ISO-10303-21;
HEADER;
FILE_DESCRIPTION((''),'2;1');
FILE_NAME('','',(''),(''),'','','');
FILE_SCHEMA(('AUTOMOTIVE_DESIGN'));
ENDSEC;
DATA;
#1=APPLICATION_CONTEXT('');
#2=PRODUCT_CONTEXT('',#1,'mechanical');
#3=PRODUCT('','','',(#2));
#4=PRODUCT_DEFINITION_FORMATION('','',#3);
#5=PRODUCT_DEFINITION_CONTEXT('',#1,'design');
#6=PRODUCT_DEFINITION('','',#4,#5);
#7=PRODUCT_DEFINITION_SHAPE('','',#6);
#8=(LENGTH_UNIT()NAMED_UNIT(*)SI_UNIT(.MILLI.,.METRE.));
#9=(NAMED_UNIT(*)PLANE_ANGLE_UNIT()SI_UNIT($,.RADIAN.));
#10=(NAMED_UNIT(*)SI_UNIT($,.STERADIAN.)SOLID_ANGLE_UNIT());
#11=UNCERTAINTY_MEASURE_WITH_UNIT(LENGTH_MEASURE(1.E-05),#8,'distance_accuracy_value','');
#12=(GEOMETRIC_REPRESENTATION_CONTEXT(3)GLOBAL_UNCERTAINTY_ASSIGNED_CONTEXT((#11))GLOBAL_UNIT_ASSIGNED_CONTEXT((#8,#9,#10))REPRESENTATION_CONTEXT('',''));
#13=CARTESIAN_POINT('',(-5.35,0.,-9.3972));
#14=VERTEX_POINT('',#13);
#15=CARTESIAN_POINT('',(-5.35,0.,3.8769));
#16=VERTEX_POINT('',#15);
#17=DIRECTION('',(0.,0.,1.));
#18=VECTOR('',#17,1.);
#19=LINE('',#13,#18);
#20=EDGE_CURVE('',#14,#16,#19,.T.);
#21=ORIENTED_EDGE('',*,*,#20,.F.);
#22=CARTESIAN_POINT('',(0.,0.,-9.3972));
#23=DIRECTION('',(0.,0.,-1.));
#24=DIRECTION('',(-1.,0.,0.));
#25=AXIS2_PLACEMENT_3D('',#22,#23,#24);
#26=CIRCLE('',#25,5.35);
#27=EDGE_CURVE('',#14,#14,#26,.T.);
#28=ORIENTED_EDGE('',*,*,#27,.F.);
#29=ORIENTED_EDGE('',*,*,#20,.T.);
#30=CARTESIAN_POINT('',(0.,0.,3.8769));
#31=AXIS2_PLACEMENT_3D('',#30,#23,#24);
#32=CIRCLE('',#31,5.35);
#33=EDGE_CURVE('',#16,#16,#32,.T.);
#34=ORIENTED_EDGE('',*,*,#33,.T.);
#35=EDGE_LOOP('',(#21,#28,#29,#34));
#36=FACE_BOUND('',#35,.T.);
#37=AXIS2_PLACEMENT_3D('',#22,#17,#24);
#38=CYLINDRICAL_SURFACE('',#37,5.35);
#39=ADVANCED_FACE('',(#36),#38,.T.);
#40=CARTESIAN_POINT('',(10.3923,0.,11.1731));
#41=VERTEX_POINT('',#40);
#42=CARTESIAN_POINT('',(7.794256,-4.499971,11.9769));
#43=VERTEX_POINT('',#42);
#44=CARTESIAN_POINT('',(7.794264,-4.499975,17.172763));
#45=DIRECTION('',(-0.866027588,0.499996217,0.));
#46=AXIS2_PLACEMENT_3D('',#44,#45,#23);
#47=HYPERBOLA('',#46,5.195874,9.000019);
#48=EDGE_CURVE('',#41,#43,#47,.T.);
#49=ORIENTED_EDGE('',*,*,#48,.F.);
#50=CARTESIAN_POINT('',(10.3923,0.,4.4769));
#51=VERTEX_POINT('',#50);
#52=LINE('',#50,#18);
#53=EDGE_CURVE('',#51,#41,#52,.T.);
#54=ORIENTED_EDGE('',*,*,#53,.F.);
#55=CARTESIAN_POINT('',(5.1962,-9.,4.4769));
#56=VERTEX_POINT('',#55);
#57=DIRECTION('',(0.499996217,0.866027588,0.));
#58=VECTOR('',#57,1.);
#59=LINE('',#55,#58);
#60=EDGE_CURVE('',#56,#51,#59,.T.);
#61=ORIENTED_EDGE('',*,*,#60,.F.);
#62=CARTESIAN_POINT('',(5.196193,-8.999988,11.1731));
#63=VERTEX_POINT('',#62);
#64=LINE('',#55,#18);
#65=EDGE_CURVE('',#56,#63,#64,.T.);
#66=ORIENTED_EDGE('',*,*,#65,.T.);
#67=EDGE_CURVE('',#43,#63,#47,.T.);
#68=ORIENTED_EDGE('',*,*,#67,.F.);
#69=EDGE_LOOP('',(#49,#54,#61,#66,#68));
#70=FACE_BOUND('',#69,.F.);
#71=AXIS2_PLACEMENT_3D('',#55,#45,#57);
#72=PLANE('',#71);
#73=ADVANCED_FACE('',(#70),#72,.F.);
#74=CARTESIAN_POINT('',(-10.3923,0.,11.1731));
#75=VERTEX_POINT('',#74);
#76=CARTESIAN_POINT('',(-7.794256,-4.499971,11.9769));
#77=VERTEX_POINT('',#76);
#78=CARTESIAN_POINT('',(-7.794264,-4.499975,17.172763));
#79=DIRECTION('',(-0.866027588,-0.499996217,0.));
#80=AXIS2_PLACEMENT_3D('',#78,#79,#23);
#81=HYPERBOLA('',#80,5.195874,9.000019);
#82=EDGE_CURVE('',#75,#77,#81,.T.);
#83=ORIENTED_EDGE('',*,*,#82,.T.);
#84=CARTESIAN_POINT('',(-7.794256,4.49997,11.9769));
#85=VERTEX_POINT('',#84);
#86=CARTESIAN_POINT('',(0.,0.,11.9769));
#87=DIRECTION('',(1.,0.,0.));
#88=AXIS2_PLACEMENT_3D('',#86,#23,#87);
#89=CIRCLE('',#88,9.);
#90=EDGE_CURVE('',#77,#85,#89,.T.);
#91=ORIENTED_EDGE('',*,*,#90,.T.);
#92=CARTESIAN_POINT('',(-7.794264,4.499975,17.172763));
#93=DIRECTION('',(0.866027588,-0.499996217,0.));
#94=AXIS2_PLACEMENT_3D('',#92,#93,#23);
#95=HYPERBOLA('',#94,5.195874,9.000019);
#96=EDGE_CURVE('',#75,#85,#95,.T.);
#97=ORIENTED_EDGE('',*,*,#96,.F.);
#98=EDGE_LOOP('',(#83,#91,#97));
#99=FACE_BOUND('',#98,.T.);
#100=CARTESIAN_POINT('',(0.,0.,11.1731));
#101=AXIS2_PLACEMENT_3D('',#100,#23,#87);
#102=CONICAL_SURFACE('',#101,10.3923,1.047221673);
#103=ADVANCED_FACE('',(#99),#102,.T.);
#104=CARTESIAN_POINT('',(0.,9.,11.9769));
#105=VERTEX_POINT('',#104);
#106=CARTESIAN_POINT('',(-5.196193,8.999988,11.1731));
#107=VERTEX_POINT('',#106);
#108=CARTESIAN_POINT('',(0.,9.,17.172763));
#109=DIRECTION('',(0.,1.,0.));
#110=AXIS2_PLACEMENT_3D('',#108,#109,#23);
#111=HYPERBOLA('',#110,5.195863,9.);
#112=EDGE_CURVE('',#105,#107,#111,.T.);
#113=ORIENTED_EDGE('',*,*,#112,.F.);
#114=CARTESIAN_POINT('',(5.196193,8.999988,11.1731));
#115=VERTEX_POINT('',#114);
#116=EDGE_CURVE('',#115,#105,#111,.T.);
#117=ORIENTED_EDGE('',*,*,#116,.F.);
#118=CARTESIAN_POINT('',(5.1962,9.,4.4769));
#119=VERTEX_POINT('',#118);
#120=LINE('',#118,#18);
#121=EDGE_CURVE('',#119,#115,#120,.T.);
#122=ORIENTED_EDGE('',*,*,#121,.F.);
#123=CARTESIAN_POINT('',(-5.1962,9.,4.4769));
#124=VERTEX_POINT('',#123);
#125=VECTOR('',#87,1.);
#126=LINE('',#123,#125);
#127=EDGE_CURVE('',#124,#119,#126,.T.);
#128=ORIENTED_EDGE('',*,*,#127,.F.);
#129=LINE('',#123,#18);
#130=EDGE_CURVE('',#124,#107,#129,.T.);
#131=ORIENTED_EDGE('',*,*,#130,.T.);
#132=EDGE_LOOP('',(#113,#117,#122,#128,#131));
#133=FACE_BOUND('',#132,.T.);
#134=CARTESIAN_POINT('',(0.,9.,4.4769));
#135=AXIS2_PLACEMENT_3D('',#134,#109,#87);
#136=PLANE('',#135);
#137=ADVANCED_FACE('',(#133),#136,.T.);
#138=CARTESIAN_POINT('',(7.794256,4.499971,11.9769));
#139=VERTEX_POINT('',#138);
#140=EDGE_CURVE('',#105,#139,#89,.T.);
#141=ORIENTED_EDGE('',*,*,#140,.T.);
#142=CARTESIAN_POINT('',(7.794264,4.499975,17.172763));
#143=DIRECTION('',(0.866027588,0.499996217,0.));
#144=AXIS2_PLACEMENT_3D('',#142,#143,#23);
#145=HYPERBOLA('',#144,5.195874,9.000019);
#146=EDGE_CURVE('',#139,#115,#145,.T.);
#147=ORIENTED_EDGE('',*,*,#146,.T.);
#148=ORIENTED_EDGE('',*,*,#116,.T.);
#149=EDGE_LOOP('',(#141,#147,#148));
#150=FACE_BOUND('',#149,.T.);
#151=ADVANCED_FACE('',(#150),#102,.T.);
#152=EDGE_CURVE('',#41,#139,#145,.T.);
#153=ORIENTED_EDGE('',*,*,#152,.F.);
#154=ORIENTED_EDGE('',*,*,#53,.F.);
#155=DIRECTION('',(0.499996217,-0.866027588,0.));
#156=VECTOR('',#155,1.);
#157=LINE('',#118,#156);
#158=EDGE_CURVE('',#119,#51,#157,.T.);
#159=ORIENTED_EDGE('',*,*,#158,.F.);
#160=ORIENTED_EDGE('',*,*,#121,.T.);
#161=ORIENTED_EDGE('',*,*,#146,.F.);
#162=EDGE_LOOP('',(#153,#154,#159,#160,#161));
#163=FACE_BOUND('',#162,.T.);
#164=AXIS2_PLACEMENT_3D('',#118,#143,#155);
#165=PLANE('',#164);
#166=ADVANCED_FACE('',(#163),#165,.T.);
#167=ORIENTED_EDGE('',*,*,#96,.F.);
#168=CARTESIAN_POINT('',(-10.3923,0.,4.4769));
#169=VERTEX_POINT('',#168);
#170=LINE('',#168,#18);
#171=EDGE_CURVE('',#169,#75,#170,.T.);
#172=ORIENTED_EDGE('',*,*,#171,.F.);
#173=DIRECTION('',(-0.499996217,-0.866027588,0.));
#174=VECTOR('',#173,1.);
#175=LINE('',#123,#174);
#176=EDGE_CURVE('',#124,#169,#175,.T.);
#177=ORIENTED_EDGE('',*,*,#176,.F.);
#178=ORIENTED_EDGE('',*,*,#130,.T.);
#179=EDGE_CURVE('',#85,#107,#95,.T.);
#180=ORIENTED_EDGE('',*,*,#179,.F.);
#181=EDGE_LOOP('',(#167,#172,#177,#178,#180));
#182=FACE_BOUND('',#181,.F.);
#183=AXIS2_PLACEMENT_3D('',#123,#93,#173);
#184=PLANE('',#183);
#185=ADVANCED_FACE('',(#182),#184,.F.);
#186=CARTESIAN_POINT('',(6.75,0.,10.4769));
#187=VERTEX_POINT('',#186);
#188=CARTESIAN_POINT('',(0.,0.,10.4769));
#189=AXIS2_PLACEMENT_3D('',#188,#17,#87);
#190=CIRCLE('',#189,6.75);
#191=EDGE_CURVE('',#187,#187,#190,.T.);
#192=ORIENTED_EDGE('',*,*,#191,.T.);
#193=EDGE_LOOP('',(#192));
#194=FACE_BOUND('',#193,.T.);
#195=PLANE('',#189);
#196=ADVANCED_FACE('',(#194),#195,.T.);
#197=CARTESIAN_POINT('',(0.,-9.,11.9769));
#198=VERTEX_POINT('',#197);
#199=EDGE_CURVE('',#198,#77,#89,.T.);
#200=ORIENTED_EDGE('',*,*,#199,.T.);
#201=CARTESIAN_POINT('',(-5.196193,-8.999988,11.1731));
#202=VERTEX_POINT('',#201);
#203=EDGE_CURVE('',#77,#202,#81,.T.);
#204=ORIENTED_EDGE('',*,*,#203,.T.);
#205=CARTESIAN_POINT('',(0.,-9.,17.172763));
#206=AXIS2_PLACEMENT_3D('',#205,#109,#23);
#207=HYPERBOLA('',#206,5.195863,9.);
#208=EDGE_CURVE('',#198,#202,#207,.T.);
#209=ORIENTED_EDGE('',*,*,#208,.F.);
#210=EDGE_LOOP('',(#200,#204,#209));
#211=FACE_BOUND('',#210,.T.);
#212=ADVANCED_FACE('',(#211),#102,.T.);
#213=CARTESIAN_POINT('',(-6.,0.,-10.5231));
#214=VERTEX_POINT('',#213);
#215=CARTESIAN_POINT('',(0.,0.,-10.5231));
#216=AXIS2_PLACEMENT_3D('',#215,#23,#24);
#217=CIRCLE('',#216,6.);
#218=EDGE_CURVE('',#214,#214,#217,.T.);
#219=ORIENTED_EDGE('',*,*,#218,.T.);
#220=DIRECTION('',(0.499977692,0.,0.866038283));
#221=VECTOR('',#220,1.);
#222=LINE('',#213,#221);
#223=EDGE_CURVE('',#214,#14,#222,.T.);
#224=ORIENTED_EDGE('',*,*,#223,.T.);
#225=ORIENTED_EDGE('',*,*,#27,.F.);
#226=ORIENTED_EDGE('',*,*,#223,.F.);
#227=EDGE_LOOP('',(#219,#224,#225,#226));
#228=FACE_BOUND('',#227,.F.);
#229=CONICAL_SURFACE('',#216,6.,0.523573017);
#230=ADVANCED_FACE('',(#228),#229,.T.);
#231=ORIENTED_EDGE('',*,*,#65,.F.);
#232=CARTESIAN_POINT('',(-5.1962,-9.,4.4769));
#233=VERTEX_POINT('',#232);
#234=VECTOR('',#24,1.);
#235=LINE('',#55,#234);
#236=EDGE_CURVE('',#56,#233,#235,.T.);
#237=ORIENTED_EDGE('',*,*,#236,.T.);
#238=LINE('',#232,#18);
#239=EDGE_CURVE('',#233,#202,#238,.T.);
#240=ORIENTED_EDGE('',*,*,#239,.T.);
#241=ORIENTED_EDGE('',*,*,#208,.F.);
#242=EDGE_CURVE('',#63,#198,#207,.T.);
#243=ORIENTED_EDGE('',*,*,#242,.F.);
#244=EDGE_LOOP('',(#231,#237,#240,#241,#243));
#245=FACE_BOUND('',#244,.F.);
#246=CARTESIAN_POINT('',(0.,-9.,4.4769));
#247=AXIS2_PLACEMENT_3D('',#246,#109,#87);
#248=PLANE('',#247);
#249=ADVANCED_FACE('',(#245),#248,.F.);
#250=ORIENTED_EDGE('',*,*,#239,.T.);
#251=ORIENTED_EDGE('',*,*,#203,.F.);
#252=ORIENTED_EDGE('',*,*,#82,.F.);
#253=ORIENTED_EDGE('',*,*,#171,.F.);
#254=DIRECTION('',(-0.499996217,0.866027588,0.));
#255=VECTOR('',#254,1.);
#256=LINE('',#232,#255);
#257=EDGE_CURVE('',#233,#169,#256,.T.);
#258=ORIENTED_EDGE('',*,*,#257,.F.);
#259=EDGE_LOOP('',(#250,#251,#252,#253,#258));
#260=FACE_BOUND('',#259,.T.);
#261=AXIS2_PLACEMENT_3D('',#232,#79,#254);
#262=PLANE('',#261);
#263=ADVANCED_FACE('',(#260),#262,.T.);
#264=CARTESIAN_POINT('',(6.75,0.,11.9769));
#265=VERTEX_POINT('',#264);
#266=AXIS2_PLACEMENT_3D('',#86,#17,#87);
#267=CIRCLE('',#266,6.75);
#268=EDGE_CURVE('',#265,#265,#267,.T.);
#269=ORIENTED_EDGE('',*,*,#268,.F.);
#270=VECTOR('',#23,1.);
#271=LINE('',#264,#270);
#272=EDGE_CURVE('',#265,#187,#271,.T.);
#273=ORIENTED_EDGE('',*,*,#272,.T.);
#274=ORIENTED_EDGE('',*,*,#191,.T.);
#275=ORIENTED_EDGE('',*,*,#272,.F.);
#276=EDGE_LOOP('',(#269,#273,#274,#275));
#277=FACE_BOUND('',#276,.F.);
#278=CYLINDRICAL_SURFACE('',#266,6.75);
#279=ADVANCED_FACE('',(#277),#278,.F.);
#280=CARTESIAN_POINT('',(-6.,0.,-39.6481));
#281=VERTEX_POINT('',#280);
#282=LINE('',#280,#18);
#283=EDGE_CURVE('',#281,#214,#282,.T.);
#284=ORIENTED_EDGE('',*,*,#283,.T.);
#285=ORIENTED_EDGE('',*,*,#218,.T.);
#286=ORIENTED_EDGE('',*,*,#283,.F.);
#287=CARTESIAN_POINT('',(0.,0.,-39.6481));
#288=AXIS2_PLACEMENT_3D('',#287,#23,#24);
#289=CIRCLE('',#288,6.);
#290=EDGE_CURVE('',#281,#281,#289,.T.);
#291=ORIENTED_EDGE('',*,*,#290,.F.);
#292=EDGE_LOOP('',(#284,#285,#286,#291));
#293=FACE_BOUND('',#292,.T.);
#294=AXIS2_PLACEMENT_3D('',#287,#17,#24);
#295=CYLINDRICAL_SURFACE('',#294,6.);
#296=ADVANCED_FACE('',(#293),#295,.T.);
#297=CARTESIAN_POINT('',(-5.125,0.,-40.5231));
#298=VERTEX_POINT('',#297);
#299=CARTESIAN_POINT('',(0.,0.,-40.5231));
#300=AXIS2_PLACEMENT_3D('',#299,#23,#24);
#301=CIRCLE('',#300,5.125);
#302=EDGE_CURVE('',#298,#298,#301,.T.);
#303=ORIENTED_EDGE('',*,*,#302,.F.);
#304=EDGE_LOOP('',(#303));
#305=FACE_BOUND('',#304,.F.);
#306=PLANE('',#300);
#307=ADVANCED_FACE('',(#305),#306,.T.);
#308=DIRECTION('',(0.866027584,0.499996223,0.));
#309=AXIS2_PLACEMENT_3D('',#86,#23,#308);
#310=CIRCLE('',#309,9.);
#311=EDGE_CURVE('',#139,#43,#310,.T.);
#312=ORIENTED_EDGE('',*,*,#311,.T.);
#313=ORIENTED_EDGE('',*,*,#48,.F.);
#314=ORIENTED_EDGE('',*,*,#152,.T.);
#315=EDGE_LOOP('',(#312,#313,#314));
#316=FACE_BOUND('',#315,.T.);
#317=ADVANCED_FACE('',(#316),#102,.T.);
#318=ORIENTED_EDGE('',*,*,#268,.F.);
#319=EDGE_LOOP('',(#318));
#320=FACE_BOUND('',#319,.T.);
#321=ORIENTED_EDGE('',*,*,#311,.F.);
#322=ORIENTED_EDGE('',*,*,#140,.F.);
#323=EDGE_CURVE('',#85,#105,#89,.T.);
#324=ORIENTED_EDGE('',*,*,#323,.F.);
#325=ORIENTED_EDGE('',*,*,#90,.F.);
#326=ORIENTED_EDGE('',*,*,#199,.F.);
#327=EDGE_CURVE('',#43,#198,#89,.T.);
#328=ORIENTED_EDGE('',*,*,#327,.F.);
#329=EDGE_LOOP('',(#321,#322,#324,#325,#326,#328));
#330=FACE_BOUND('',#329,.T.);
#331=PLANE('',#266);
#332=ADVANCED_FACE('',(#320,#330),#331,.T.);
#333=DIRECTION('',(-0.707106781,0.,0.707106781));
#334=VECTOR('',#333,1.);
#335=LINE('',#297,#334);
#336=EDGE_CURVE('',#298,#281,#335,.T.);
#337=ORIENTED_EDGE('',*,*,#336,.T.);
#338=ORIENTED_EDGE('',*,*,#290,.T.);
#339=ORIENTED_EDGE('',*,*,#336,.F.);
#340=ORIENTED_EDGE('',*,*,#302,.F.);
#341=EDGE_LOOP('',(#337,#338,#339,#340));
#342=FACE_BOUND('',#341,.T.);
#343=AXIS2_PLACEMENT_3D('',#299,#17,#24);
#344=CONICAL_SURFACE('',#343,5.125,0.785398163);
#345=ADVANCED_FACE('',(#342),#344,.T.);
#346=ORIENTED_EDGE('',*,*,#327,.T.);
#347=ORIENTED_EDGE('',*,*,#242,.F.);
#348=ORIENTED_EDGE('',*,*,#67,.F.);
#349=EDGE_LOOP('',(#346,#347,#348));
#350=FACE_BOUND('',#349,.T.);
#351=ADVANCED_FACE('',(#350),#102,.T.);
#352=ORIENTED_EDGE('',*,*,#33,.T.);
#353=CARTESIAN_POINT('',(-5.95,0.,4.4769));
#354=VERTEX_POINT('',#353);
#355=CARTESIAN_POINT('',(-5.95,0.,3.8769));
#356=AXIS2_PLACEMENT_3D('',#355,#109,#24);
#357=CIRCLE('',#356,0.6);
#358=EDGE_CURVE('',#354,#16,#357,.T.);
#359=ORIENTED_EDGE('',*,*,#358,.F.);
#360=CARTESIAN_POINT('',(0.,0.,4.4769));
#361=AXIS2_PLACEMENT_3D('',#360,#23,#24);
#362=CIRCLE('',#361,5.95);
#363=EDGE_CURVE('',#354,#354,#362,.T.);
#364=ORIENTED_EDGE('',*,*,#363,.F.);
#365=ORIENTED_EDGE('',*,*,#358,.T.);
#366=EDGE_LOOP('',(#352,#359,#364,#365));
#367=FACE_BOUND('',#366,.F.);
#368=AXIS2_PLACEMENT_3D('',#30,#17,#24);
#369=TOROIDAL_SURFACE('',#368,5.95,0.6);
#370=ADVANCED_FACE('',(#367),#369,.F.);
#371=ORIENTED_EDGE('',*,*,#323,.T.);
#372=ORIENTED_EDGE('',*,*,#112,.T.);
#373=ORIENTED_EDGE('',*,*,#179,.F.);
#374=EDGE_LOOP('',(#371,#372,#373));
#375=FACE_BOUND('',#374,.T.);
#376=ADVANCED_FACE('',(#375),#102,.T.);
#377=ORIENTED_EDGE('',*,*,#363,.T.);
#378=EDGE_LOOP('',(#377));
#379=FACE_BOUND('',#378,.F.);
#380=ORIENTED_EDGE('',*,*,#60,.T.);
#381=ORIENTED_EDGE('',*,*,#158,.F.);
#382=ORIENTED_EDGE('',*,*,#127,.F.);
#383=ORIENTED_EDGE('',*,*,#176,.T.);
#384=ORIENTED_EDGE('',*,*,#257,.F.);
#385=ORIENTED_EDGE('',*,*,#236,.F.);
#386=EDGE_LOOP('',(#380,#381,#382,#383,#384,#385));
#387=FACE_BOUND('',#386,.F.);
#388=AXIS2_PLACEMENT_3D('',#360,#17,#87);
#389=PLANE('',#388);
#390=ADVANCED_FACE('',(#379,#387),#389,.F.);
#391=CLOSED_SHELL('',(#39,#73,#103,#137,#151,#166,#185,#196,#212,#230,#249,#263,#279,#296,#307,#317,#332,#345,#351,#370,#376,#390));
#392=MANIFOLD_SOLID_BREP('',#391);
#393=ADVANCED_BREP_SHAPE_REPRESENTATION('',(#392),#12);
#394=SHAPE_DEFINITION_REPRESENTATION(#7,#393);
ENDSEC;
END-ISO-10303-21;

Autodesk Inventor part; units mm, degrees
ref_plane "YZ Plane" through (0, 0, 0) normal (1, 0, 0) x (0, 1, 0)
sketch "Sketch2" plane through (0, 0, 0) normal (0, 1, 0) x (-1, 0, 0)
  line L0 (0, 4.4769) -> (0, -40.5231)
  line L1 (0, -40.5231) -> (5.125, -40.5231)
  line L2 (6, -39.6481) -> (6, -10.5231)
  line L3 (6, -10.5231) -> (5.35, -9.3972)
  line L4 (5.35, -9.3972) -> (5.35, 4.4769)
  line L5 (5.35, 4.4769) -> (0, 4.4769)
  line L6 (5.125, -40.5231) -> (6, -39.6481)
  line L7 (6, -40.5231) -> (6, -41.7605)
  line L8 (0, -51.008) -> (0, 13.7244) projected
  dimension "Ds" = 10.7
  dimension "NND" = 12
  dimension "b" = 30
  dimension "d3" = 30
  dimension "d5" = 45
  dimension "PTC" = 1.75
  dimension "NLG" = 45
revolve "Revolution1" add sketch "Sketch2" angle 360 about axis through (0, 0, 4.4769) along (0, 0, -1)
sketch "Sketch3" plane through (0, 0, 4.4769) normal (0, 0, 1) x (1, 0, 0)
  circle A0 centre (0, 0) radius 5.35 projected
  line L0 (0, 9) -> (5.1962, 9)
  line L1 (5.1962, 9) -> (10.3923, 0)
  line L2 (10.3923, 0) -> (0, 0)
  line L3 (0, 0) -> (0, 9)
  line L4 (0, 9) -> (-5.1962, 9)
  line L5 (-5.1962, 9) -> (-10.3923, 0)
  line L6 (0, -9) -> (5.1962, -9)
  line L7 (5.1962, -9) -> (10.3923, 0)
  line L8 (-5.1962, -9) -> (-10.3923, 0)
  line L9 (0, -9) -> (-5.1962, -9)
  dimension "d9" = 60
  dimension "ParS" = 18
  dimension "msp_d11" = 18
extrude "Extrusion1" add sketch "Sketch3" along normal blind 7.5
sketch "Sketch4" plane through (0, 0, 0) normal (0, 1, 0) x (-1, 0, 0)
  line L0 (-9, 11.9769) -> (-10.3923, 11.9769)
  line L1 (-10.3923, 11.9769) -> (-10.3923, 11.1731)
  line L2 (-10.3923, 11.1731) -> (-9, 11.9769)
  line L3 (0, -0.2242) -> (0, 32.6837) projected
  line L4 (0, 27.9826) -> (0, 27.1787)
  line L5 (-10.3923, 4.4769) -> (-10.3923, 11.9769) projected
  line L6 (-5.1962, 11.9769) -> (-10.3923, 11.9769) projected
  dimension "d14" = 30
  dimension "msp_d15" = 18
revolve "Revolution2" cut sketch "Sketch4" angle 360 about axis through (0, 0, 27.9826) along (0, 0, -1)
sketch "Sketch5" plane through (0, 0, 11.9769) normal (0, 0, 1) x (1, 0, 0)
  arc A0 (7.7942, 4.5) -> (0, 9) centre (0, 0) ccw projected
  circle A1 centre (0, 0) radius 6.75
  dimension "d27" = 13.5
extrude "Extrusion2" cut sketch "Sketch5" against normal blind 1.5
thread "Thread1" size "M12x1.75" class "6g" standard "ISO Metric profile" full length
ref_plane "MSC_PF1" through (0, 0, 0) normal (0, 1, 0) x (-1, 0, 0)
ref_plane "MSC_PT1" through (0, 0, 4.4769) normal (0, 0, -1) x (-1, 0, 0)
fillet "Fillet1" radius 0.6 1 edges at (5.35, 0, 4.4769)
equation "\"msp_d11\" = ParS"
equation "\"msp_d15\" = ParS"
equation "\"d27\" = 0.75 * ParS"
equation "\"d28\" = 0.2 * ParK"
equation "\"d30\" = r"
equation "\"msp_d17\" = b"
equation "\"r\" = 0.6"
equation "\"THREADDIA\" = NND"
equation "\"ParK\" = 7.5"
properties part number "DIN EN ISO 4015 - M12x45" material "Stainless Steel, 440C"
